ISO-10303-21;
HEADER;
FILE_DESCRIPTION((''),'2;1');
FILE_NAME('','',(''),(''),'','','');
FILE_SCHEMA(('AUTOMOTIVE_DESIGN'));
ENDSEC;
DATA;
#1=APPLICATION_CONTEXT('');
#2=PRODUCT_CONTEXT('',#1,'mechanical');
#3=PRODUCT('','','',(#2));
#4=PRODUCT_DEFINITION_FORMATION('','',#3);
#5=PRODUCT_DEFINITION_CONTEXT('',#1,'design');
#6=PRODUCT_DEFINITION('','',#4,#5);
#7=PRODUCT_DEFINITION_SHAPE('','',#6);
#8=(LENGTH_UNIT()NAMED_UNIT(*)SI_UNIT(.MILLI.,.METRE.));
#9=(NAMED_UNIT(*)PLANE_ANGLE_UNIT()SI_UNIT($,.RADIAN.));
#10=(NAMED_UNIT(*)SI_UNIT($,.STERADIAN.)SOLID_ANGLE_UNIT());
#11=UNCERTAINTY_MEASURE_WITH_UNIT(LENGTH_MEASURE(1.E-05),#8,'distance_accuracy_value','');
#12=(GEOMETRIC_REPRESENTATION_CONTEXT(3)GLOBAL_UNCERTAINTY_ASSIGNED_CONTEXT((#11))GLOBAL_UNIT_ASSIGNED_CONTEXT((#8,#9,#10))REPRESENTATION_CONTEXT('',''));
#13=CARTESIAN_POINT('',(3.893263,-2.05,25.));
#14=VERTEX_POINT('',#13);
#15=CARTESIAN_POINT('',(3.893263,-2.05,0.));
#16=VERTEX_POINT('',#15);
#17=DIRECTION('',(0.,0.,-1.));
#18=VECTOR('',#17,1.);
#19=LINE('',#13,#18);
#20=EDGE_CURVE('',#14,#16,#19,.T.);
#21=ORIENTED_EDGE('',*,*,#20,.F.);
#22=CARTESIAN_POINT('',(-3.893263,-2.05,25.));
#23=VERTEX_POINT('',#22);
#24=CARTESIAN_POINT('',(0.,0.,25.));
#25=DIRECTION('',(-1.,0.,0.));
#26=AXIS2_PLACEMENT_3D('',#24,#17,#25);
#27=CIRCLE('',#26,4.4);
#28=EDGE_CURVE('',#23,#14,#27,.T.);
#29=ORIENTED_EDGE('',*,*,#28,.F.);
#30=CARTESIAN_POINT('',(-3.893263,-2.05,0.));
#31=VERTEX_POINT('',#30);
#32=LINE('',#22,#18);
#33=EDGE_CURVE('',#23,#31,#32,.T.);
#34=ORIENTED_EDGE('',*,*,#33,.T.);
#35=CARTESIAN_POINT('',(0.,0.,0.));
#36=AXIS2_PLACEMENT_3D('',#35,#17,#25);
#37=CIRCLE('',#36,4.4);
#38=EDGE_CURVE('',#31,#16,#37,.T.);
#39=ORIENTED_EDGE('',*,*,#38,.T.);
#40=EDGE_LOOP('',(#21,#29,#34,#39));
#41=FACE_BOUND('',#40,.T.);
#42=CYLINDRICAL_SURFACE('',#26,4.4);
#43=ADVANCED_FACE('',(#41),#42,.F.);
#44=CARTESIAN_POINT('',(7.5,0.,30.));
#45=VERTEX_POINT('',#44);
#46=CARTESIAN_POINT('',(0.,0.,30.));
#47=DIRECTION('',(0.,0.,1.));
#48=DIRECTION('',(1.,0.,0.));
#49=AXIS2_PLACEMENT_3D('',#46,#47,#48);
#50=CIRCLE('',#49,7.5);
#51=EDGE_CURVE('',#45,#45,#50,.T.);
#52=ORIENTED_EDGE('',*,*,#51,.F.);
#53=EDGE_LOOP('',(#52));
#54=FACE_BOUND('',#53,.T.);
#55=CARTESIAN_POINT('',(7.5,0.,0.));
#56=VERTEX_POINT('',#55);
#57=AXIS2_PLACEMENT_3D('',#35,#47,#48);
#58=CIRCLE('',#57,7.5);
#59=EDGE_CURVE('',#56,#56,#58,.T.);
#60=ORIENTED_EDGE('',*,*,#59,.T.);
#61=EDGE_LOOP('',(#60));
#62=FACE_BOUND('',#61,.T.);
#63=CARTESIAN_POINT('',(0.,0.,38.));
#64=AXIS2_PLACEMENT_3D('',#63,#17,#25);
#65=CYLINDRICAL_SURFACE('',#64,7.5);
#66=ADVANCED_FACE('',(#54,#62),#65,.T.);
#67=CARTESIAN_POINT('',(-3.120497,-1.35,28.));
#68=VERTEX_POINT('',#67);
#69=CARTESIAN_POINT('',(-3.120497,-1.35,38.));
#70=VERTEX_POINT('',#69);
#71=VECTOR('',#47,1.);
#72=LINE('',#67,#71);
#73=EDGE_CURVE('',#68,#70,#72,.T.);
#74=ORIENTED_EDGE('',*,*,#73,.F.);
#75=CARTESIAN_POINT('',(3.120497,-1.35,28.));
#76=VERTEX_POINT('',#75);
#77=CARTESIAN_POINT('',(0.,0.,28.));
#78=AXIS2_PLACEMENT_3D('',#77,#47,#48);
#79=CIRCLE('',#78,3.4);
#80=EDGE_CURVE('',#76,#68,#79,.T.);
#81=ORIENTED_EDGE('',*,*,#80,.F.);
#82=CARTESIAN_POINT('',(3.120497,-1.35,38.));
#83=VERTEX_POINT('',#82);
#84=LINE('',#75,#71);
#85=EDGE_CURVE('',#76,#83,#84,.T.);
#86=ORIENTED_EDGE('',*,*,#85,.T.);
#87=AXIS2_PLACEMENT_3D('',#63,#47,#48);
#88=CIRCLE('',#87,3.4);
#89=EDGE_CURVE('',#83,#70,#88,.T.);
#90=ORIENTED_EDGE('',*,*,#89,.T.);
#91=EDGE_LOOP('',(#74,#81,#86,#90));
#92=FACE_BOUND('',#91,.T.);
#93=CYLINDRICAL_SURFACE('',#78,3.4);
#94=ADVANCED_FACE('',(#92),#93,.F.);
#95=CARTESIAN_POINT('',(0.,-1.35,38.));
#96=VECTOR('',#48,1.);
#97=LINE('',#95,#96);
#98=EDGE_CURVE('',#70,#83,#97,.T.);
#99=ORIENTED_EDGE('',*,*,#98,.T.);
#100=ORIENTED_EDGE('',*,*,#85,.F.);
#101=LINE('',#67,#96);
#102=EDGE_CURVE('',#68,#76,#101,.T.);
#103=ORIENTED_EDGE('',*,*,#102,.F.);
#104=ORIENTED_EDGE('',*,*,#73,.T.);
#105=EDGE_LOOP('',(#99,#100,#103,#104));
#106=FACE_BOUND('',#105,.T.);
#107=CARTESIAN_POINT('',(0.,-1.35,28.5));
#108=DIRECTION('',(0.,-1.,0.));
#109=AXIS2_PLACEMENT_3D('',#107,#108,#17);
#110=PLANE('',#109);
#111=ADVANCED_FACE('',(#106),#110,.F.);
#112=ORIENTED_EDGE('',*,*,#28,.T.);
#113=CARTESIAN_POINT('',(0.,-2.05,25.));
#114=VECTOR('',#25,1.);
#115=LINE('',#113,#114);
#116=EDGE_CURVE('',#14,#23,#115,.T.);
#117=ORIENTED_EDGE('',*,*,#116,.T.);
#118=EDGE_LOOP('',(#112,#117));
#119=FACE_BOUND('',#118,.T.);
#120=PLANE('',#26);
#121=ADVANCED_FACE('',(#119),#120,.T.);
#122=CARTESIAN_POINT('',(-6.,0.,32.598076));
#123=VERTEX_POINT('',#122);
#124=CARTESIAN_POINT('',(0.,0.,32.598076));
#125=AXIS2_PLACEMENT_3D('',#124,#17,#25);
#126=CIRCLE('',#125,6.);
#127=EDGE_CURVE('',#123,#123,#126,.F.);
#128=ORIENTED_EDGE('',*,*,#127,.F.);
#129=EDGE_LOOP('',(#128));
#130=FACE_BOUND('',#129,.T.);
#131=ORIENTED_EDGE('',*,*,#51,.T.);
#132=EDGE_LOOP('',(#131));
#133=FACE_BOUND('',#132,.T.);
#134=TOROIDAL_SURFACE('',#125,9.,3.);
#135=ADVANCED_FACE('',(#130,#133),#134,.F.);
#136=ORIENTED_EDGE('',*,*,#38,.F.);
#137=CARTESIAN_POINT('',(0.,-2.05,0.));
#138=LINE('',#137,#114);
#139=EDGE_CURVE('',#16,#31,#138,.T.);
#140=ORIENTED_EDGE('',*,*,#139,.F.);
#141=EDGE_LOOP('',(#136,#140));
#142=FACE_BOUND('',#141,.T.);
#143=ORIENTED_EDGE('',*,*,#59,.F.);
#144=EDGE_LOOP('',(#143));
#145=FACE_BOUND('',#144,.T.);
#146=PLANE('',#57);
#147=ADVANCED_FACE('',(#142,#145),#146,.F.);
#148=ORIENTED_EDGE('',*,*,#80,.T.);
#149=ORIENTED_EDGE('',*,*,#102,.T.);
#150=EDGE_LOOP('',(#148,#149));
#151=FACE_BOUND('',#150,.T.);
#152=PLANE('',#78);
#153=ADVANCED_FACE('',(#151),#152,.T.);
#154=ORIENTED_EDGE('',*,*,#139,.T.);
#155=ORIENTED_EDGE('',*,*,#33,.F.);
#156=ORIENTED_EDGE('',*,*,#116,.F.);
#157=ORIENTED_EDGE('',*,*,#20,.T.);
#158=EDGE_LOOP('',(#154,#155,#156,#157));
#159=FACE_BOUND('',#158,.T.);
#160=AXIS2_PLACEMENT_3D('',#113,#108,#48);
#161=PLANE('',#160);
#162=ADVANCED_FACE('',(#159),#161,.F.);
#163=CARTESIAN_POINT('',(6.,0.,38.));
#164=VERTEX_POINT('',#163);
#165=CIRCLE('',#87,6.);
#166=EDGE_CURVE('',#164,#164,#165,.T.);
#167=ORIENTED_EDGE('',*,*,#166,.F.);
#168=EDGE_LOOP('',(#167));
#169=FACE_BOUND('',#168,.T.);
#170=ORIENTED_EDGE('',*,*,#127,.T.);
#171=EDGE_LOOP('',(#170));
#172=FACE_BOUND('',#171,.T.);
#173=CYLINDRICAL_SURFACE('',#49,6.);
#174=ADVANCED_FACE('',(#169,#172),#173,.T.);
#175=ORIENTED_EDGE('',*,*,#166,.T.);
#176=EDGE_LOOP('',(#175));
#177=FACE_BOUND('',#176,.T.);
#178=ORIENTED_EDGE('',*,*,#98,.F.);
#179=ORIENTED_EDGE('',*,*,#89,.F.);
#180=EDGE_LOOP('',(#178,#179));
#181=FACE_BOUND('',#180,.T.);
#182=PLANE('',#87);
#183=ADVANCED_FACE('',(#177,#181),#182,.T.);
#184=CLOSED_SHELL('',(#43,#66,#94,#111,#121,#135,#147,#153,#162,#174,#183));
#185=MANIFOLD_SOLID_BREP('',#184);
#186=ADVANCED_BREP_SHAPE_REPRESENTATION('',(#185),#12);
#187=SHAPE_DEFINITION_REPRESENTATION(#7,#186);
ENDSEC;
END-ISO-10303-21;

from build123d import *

# Parameters (mm, degrees)
IZIM1_R                     = 7.5
Y_KSEKLIK_EKSTR_ZYON1_DEPTH = 38
KES_EKSTR_ZYON1_DEPTH       = 9.5
KES_EKSTR_ZYON3_DEPTH       = 25
KES_EKSTR_ZYON4_START       = -8
IZIM4_R                     = 7.5
IZIM4_R_2                   = 6
KES_EKSTR_ZYON4_DEPTH       = 8
RADYUS1_R                   = 3
KES_EKSTR_ZYON5_DEPTH       = 10
KES_EKSTR_ZYON6_DEPTH       = 25
KES_EKSTR_ZYON7_DEPTH       = 25


with BuildPart() as part:
    # Çizim1 → Yükseklik-Ekstrüzyon1 (new body)
    with BuildSketch(Plane.XY):
        Circle(IZIM1_R)
    extrude(amount=Y_KSEKLIK_EKSTR_ZYON1_DEPTH)

    # Çizim2 → Kes-Ekstrüzyon1 (cut)
    with BuildSketch(Plane.XY.offset(38)):
        with BuildLine():
            Line((0, -1.35), (-2.734958866, -1.35))
            ThreePointArc((-2.734958866, -1.35), (0, 3.05), (2.734958866, -1.35))
            Line((2.734958866, -1.35), (0, -1.35))
        make_face()
    extrude(amount=-KES_EKSTR_ZYON1_DEPTH, mode=Mode.SUBTRACT)

    # Çizim3 → Kes-Ekstrüzyon3 (cut)
    with BuildSketch(Plane(origin=(0, 0, 0), x_dir=(-1, 0, 0), z_dir=(0, 0, -1))):
        with BuildLine():
            Line((0, -2.05), (-3.258834147, -2.05))
            ThreePointArc((-3.258834147, -2.05), (0, 3.85), (3.258834147, -2.05))
            Line((3.258834147, -2.05), (0, -2.05))
        make_face()
    extrude(amount=-KES_EKSTR_ZYON3_DEPTH, mode=Mode.SUBTRACT)

    # Çizim4 → Kes-Ekstrüzyon4 (cut)
    with BuildSketch(Plane.XY.offset(38).offset(KES_EKSTR_ZYON4_START)):
        Circle(IZIM4_R)
        Circle(IZIM4_R_2, mode=Mode.SUBTRACT)
    extrude(amount=KES_EKSTR_ZYON4_DEPTH, mode=Mode.SUBTRACT)

    # Radyus1
    # the kernel refuses this fillet: 3 mm, written as the material it adds along each edge
    with BuildSketch(Plane(origin=(0, 0, 30), x_dir=(1, 0, 0), z_dir=(0, -1, 0))) as radyus1_piece_1:
        with BuildLine():
            CenterArc((9, 2.598076211), RADYUS1_R, 180, 60)
            Line((6, 2.598076211), (5.94, 2.598076211))
            Line((5.94, 2.598076211), (5.94, 0))
            Line((5.94, 0), (6, -0.06))
            ThreePointArc((6, -0.06), (6.75, -0.06), (7.47, -0.051961524))
            Line((7.47, -0.051961524), (7.5, 0))
        make_face()
    revolve(axis=Axis((0, 0, 30), (0, 0, 1)))

    # Çizim5 → Kes-Ekstrüzyon5 (cut)
    with BuildSketch(Plane.XY.offset(38)):
        with BuildLine():
            Line((-3.120496755, -1.35), (3.120496755, -1.35))
            ThreePointArc((3.120496755, -1.35), (0, 3.4), (-3.120496755, -1.35))
        make_face()
    extrude(amount=-KES_EKSTR_ZYON5_DEPTH, mode=Mode.SUBTRACT)

    # Çizim6 → Kes-Ekstrüzyon6 (cut)
    with BuildSketch(Plane(origin=(0, 0, 0), x_dir=(-1, 0, 0), z_dir=(0, 0, -1))):
        with BuildLine():
            Line((-3.434748899, -2.05), (3.434748899, -2.05))
            ThreePointArc((3.434748899, -2.05), (0, 4), (-3.434748899, -2.05))
        make_face()
    extrude(amount=-KES_EKSTR_ZYON6_DEPTH, mode=Mode.SUBTRACT)

    # Çizim8 → Kes-Ekstrüzyon7 (cut)
    with BuildSketch(Plane(origin=(0, 0, 0), x_dir=(-1, 0, 0), z_dir=(0, 0, -1))):
        with BuildLine():
            Line((-3.893263413, -2.05), (3.893263413, -2.05))
            ThreePointArc((3.893263413, -2.05), (0, 4.4), (-3.893263413, -2.05))
        make_face()
    extrude(amount=-KES_EKSTR_ZYON7_DEPTH, mode=Mode.SUBTRACT)


solid = part.part
